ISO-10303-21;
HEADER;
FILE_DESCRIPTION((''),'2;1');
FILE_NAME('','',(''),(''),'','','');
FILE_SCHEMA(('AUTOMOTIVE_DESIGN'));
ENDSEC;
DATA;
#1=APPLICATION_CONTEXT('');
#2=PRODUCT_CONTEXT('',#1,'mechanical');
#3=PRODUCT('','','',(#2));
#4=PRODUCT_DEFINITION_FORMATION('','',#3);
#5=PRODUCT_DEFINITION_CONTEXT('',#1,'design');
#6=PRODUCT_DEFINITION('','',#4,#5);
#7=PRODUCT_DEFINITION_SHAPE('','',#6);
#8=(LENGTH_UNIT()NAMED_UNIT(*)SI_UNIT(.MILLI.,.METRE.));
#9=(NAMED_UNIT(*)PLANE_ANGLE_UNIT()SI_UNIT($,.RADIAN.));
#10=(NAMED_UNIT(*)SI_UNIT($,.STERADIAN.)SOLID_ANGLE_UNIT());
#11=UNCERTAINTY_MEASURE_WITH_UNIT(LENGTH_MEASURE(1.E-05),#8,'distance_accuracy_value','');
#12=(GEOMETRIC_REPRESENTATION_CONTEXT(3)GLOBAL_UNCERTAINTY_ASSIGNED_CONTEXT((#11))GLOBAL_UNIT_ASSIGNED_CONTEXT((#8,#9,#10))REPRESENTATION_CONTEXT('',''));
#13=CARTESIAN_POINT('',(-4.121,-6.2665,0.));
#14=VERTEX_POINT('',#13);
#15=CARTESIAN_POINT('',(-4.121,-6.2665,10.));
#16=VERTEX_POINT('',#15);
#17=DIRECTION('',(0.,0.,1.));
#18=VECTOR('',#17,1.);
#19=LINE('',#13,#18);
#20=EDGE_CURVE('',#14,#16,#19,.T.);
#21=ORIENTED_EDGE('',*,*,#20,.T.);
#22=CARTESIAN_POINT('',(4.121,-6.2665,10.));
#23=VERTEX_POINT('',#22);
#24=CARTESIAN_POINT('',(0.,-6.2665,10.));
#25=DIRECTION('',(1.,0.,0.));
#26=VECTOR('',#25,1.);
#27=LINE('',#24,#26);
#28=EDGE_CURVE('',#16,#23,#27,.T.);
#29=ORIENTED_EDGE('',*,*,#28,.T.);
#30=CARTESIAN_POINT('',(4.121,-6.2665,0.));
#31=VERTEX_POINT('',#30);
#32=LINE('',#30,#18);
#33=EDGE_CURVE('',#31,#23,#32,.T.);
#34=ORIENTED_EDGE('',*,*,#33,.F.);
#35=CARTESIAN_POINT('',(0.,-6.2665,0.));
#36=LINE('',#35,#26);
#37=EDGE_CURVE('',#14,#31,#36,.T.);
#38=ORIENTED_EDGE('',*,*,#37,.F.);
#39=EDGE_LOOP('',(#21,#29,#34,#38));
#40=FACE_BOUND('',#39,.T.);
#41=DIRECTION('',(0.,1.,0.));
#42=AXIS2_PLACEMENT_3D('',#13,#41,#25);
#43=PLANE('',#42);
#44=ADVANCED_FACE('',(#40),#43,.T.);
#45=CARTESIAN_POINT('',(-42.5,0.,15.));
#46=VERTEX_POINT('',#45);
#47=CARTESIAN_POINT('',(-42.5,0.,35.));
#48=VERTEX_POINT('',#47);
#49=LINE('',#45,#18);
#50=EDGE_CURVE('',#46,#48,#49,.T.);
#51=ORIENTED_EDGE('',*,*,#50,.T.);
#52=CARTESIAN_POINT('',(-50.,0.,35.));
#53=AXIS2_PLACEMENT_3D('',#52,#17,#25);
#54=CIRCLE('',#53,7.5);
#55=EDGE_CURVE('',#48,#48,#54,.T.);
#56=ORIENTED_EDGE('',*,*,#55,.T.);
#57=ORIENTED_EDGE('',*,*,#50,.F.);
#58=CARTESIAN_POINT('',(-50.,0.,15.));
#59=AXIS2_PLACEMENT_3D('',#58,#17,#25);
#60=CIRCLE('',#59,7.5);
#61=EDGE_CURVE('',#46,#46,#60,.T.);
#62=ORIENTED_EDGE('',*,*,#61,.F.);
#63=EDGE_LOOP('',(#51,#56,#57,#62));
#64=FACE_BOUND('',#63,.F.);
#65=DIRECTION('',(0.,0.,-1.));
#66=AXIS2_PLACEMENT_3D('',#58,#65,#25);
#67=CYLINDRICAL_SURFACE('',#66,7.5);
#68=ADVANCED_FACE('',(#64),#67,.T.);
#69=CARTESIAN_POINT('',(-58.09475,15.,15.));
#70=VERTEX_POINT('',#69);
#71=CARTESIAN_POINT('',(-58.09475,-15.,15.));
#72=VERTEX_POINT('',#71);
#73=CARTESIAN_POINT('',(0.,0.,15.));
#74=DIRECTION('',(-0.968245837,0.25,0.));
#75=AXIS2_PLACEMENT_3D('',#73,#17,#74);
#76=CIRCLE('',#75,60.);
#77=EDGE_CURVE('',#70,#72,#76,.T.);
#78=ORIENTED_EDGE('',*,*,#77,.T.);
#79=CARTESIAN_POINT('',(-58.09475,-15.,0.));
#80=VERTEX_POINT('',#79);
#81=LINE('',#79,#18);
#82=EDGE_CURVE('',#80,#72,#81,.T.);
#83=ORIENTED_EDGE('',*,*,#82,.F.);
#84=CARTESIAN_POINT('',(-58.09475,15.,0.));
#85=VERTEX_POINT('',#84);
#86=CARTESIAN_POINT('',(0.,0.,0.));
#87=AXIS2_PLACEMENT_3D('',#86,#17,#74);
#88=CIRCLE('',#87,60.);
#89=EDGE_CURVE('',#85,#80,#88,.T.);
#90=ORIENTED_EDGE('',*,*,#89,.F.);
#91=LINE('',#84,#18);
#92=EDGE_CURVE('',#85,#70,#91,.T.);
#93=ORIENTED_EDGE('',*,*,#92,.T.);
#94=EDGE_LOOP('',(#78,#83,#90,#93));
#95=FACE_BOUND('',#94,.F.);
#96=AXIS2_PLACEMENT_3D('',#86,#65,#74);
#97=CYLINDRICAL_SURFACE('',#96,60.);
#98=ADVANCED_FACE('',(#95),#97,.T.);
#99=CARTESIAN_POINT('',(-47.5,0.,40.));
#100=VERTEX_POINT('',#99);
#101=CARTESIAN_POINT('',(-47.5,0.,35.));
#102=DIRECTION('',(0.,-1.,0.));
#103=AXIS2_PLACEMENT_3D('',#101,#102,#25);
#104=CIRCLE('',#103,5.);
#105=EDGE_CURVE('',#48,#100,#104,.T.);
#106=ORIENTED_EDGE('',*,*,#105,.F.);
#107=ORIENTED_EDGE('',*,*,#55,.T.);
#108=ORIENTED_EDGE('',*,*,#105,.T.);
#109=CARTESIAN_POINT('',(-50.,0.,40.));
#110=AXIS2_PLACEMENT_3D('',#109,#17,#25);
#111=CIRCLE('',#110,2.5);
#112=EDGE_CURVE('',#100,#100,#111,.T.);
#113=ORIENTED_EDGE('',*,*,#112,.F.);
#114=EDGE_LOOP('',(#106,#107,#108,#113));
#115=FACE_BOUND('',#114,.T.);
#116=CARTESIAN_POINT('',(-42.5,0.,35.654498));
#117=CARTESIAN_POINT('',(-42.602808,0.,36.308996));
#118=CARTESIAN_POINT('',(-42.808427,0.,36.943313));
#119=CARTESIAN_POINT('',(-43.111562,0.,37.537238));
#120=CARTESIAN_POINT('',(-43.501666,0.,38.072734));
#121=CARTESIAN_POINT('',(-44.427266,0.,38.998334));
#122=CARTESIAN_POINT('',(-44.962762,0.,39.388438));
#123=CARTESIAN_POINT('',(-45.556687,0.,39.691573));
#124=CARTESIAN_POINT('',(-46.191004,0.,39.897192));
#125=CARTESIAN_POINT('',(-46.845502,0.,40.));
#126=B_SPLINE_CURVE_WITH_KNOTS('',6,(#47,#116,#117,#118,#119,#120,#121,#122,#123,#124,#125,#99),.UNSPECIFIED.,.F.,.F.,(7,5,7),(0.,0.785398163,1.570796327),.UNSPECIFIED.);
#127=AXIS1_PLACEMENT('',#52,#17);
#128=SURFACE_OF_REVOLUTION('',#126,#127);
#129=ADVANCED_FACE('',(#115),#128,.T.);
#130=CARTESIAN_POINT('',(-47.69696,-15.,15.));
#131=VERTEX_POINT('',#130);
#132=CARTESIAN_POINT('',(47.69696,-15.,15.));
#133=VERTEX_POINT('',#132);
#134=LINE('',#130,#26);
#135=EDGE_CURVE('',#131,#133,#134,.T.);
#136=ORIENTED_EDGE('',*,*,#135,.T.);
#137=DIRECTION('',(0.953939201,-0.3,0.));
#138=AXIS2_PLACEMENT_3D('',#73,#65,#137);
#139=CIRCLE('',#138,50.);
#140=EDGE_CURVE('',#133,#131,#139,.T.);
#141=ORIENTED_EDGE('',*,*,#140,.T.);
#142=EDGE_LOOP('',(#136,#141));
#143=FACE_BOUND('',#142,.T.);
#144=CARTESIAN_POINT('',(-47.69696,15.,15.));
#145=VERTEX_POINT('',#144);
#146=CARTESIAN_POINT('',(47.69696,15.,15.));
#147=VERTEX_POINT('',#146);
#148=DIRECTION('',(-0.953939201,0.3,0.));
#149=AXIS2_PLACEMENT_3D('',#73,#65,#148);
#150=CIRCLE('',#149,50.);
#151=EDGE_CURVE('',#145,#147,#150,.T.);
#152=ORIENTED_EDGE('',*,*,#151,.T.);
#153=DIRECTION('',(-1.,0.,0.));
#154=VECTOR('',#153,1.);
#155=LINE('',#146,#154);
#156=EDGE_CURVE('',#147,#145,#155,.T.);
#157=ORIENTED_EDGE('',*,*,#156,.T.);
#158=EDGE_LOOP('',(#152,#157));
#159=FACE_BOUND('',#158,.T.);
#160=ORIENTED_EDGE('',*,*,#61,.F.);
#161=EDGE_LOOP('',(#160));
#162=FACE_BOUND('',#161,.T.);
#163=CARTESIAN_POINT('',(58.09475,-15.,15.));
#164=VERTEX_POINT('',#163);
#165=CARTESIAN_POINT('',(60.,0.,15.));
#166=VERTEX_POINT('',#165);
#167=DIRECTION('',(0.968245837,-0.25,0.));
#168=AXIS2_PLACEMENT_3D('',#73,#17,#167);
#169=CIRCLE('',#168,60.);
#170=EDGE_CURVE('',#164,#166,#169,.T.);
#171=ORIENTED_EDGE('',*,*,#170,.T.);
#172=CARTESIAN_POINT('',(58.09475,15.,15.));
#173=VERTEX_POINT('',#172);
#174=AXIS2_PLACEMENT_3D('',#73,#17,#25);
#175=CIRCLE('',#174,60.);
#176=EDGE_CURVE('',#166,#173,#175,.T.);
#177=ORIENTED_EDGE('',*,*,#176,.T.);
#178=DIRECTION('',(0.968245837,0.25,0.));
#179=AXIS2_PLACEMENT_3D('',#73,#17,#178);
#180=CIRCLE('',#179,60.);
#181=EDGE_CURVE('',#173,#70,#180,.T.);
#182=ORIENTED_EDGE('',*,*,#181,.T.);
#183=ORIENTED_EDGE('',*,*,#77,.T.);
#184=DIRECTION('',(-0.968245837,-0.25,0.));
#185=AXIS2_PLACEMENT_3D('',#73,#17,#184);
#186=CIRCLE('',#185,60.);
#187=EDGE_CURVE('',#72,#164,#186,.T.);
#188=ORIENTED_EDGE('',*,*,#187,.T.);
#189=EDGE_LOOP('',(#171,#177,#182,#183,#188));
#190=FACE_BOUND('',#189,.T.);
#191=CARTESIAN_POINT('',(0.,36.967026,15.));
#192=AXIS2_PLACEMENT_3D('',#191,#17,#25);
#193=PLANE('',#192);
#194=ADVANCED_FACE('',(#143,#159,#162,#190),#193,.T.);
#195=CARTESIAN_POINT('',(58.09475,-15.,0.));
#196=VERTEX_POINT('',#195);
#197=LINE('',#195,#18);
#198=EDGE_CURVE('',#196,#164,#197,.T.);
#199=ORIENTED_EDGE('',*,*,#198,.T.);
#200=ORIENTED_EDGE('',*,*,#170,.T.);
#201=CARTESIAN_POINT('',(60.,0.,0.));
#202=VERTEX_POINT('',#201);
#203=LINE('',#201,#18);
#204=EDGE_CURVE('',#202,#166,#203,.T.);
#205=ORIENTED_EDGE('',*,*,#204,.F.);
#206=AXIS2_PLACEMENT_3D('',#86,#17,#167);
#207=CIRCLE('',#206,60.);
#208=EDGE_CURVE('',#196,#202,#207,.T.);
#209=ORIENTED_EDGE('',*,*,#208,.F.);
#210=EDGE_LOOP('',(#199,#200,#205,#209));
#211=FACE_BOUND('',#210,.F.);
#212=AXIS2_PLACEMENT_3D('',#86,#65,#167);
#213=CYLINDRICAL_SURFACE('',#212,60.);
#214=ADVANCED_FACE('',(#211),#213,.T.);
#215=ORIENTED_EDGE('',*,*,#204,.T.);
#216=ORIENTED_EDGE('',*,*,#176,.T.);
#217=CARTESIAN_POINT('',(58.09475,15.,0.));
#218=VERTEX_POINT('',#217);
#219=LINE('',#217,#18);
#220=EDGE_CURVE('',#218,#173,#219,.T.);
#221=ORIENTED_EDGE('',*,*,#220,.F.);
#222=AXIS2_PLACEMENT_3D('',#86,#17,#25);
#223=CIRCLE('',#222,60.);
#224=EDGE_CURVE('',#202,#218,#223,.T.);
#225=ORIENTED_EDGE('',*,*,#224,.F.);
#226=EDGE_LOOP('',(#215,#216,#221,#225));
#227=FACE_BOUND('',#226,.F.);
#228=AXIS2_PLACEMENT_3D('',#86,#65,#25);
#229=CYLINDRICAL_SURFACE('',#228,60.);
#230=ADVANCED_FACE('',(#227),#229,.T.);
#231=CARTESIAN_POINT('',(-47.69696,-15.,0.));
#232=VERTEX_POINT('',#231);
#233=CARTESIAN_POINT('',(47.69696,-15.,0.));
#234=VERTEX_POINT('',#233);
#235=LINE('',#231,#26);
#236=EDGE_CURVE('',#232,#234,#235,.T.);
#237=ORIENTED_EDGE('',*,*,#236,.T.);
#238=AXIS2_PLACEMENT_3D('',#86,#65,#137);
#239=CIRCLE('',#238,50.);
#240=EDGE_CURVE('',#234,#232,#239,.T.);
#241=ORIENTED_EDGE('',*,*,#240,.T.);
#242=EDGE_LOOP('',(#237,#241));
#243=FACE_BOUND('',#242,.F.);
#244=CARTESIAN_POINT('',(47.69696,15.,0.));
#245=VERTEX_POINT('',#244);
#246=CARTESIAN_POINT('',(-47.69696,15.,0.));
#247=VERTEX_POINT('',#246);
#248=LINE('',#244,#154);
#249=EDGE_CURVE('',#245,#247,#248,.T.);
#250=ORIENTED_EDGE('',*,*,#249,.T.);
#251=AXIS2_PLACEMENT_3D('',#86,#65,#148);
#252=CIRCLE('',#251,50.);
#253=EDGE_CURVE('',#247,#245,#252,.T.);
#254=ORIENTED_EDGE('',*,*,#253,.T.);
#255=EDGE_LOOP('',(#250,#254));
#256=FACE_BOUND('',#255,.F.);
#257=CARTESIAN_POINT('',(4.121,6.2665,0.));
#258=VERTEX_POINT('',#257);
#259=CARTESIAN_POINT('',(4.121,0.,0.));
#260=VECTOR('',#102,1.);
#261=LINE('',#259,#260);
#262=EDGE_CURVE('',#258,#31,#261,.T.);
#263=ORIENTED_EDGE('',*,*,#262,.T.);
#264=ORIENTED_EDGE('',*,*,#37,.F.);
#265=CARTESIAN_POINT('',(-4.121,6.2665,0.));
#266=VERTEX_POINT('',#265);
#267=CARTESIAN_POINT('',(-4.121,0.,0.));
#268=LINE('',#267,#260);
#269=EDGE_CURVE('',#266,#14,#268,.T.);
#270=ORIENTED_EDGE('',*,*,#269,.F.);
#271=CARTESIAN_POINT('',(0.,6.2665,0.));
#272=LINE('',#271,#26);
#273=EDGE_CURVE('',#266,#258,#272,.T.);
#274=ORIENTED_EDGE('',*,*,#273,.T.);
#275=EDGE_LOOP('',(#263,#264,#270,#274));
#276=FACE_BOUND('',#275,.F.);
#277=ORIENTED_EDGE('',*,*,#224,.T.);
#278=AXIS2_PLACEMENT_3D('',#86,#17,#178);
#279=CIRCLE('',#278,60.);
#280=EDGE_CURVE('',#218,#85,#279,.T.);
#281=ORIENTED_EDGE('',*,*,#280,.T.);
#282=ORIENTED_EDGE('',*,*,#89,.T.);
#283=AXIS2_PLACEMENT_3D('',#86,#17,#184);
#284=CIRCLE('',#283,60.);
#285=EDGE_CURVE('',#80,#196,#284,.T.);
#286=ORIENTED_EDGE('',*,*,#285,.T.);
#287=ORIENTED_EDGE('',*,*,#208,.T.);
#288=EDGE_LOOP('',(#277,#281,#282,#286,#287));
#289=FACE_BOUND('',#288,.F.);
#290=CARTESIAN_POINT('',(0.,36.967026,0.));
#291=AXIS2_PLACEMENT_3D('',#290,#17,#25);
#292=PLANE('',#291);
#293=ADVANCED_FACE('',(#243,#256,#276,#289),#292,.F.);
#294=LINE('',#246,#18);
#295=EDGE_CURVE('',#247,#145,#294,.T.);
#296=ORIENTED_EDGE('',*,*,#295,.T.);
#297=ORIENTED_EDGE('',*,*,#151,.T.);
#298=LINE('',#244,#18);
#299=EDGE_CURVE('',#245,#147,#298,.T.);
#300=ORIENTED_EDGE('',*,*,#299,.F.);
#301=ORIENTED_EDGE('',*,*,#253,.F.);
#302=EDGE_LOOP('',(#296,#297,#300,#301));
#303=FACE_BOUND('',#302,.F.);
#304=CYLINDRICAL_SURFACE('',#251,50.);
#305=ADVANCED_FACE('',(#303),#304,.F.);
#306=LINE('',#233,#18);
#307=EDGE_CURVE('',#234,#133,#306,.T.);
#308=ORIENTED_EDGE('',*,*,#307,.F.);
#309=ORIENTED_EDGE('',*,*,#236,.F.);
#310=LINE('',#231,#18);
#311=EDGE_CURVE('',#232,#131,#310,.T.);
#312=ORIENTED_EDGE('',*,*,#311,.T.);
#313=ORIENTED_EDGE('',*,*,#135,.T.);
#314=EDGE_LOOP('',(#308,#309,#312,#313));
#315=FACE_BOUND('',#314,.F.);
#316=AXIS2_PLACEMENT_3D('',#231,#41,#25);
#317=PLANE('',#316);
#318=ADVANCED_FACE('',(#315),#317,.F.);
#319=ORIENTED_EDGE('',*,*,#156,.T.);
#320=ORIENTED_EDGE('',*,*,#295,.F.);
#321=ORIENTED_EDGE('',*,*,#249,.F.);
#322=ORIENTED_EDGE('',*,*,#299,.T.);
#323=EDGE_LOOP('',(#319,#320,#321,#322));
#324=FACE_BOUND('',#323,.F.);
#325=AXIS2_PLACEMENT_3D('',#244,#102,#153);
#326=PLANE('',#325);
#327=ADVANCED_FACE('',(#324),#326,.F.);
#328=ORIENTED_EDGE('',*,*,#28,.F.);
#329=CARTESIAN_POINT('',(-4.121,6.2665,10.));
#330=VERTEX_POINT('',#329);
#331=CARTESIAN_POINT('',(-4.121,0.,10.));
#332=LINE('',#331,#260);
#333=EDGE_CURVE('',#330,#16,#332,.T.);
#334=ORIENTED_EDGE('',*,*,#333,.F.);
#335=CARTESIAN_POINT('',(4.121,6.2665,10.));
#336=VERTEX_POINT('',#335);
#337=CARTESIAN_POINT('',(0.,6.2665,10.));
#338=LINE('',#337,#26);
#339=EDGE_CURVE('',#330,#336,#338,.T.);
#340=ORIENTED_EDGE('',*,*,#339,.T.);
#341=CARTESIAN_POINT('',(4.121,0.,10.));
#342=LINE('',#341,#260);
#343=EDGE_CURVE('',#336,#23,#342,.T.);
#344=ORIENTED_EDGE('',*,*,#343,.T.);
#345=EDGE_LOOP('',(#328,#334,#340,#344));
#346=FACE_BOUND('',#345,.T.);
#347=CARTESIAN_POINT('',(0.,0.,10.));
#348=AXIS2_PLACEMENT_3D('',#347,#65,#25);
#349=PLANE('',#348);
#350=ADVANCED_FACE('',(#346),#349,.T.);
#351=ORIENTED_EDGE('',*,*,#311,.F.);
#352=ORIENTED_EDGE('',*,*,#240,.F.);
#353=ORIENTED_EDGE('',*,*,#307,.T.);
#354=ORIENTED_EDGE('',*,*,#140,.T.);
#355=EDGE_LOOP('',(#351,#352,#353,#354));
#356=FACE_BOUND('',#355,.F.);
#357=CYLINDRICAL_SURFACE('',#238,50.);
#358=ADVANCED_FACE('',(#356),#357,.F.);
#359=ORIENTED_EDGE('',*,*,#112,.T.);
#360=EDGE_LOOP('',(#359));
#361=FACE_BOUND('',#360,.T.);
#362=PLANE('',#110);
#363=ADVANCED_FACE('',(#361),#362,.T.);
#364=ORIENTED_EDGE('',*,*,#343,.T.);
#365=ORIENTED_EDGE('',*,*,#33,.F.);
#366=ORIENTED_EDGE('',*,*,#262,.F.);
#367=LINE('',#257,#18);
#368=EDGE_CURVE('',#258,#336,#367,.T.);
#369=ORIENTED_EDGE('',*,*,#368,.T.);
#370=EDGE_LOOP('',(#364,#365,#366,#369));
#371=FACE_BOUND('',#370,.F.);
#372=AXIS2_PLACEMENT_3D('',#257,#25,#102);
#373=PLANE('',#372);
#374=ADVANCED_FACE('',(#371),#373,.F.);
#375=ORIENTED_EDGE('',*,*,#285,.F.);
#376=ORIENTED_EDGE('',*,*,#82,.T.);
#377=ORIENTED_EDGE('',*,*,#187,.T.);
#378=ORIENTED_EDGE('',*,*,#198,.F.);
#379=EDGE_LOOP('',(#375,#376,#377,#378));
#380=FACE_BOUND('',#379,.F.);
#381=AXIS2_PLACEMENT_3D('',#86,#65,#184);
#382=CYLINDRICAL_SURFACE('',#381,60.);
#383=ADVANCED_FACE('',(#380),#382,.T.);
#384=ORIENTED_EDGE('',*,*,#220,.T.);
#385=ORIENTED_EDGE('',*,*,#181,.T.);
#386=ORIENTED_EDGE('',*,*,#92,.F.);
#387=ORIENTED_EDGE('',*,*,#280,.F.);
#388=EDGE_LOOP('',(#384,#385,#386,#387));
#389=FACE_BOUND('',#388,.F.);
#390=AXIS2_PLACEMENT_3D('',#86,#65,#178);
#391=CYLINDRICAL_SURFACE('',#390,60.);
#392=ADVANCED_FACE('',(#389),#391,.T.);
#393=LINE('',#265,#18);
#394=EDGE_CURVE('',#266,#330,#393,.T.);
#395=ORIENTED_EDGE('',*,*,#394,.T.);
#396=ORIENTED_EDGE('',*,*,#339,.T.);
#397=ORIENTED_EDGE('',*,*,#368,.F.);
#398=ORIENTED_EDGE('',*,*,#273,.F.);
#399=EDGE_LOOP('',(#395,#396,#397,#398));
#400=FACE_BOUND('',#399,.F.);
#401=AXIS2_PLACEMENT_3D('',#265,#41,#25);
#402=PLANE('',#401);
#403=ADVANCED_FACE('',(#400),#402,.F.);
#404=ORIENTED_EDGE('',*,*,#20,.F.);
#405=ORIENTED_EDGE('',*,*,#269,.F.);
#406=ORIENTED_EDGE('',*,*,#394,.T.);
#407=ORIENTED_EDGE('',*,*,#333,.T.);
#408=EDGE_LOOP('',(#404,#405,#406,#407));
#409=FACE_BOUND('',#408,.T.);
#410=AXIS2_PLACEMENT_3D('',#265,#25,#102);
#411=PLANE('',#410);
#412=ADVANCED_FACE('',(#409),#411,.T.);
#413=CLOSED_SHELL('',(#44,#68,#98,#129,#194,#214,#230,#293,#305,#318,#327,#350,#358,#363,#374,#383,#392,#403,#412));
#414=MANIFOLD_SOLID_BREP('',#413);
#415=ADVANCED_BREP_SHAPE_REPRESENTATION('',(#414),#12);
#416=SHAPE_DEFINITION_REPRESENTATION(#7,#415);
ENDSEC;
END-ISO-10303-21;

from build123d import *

# Parameters (mm, degrees)
F1_DEPTH = 15
F2_R     = 7.5
F3_DEPTH = 25
F4_R     = 5
F5_W     = 8.242
F5_H     = 12.533
F6_DEPTH = 10


# Not quite as in the source:
# - a feature names something its author has since deleted; it is built from what else it names


with BuildPart() as f1:
    # F0 (on Top) → F1 (new body)
    with BuildSketch(Plane.XY):
        with BuildLine():
            Line((47.6969600708, 15), (58.0947501931, 15))
            ThreePointArc((58.0947501931, 15), (0, 60), (-58.0947501931, 15))
            Line((-58.0947501931, 15), (-47.6969600708, 15))
            ThreePointArc((-47.6969600708, 15), (0, 50), (47.6969600708, 15))
        make_face()
        with BuildLine():
            Line((-47.6969600708, 15), (-58.0947501931, 15))
            ThreePointArc((-58.0947501931, 15), (-60, 0), (-58.0947501931, -15))
            Line((-58.0947501931, -15), (-47.6969600708, -15))
            ThreePointArc((-47.6969600708, -15), (-50, 0), (-47.6969600708, 15))
        make_face()
        with BuildLine():
            ThreePointArc((-58.0947501931, -15), (0, -60), (58.0947501931, -15))
            Line((58.0947501931, -15), (47.6969600708, -15))
            ThreePointArc((47.6969600708, -15), (0, -50), (-47.6969600708, -15))
            Line((-47.6969600708, -15), (-58.0947501931, -15))
        make_face()
        with BuildLine():
            ThreePointArc((58.0947501931, -15), (59.521781776, -7.560257549), (60, 0))
            ThreePointArc((60, 0), (59.521781776, 7.560257549), (58.0947501931, 15))
            Line((58.0947501931, 15), (47.6969600708, 15))
            ThreePointArc((47.6969600708, 15), (49.4208862908, 7.5878849641), (50, 0))
            ThreePointArc((50, 0), (49.4208862908, -7.5878849641), (47.6969600708, -15))
            Line((47.6969600708, -15), (58.0947501931, -15))
        make_face()
        with BuildLine():
            ThreePointArc((50, 0), (49.4208862908, 7.5878849641), (47.6969600708, 15))
            Line((47.6969600708, 15), (-47.6969600708, 15))
            ThreePointArc((-47.6969600708, 15), (-50, 0), (-47.6969600708, -15))
            Line((-47.6969600708, -15), (47.6969600708, -15))
            ThreePointArc((47.6969600708, -15), (49.4208862908, -7.5878849641), (50, 0))
        make_face()
    extrude(amount=F1_DEPTH)

    # F2 (on face) → F3 (join)
    with BuildSketch(Plane.XY.offset(15)):
        with Locations((-50, 0)):
            Circle(F2_R)
    extrude(amount=F3_DEPTH)

    # F4
    f4_edges = [f1.edges().sort_by_distance(p)[0] for p in [
        (-57.5, 0, 40),
    ]]
    fillet(f4_edges, radius=F4_R)

    # F5 (on face) → F6 (cut)
    with BuildSketch(Plane(origin=(0, 0, 0), x_dir=(1, 0, 0), z_dir=(0, 0, -1))):
        Rectangle(F5_W, F5_H)
    extrude(amount=-F6_DEPTH, mode=Mode.SUBTRACT)


solid = f1.part
